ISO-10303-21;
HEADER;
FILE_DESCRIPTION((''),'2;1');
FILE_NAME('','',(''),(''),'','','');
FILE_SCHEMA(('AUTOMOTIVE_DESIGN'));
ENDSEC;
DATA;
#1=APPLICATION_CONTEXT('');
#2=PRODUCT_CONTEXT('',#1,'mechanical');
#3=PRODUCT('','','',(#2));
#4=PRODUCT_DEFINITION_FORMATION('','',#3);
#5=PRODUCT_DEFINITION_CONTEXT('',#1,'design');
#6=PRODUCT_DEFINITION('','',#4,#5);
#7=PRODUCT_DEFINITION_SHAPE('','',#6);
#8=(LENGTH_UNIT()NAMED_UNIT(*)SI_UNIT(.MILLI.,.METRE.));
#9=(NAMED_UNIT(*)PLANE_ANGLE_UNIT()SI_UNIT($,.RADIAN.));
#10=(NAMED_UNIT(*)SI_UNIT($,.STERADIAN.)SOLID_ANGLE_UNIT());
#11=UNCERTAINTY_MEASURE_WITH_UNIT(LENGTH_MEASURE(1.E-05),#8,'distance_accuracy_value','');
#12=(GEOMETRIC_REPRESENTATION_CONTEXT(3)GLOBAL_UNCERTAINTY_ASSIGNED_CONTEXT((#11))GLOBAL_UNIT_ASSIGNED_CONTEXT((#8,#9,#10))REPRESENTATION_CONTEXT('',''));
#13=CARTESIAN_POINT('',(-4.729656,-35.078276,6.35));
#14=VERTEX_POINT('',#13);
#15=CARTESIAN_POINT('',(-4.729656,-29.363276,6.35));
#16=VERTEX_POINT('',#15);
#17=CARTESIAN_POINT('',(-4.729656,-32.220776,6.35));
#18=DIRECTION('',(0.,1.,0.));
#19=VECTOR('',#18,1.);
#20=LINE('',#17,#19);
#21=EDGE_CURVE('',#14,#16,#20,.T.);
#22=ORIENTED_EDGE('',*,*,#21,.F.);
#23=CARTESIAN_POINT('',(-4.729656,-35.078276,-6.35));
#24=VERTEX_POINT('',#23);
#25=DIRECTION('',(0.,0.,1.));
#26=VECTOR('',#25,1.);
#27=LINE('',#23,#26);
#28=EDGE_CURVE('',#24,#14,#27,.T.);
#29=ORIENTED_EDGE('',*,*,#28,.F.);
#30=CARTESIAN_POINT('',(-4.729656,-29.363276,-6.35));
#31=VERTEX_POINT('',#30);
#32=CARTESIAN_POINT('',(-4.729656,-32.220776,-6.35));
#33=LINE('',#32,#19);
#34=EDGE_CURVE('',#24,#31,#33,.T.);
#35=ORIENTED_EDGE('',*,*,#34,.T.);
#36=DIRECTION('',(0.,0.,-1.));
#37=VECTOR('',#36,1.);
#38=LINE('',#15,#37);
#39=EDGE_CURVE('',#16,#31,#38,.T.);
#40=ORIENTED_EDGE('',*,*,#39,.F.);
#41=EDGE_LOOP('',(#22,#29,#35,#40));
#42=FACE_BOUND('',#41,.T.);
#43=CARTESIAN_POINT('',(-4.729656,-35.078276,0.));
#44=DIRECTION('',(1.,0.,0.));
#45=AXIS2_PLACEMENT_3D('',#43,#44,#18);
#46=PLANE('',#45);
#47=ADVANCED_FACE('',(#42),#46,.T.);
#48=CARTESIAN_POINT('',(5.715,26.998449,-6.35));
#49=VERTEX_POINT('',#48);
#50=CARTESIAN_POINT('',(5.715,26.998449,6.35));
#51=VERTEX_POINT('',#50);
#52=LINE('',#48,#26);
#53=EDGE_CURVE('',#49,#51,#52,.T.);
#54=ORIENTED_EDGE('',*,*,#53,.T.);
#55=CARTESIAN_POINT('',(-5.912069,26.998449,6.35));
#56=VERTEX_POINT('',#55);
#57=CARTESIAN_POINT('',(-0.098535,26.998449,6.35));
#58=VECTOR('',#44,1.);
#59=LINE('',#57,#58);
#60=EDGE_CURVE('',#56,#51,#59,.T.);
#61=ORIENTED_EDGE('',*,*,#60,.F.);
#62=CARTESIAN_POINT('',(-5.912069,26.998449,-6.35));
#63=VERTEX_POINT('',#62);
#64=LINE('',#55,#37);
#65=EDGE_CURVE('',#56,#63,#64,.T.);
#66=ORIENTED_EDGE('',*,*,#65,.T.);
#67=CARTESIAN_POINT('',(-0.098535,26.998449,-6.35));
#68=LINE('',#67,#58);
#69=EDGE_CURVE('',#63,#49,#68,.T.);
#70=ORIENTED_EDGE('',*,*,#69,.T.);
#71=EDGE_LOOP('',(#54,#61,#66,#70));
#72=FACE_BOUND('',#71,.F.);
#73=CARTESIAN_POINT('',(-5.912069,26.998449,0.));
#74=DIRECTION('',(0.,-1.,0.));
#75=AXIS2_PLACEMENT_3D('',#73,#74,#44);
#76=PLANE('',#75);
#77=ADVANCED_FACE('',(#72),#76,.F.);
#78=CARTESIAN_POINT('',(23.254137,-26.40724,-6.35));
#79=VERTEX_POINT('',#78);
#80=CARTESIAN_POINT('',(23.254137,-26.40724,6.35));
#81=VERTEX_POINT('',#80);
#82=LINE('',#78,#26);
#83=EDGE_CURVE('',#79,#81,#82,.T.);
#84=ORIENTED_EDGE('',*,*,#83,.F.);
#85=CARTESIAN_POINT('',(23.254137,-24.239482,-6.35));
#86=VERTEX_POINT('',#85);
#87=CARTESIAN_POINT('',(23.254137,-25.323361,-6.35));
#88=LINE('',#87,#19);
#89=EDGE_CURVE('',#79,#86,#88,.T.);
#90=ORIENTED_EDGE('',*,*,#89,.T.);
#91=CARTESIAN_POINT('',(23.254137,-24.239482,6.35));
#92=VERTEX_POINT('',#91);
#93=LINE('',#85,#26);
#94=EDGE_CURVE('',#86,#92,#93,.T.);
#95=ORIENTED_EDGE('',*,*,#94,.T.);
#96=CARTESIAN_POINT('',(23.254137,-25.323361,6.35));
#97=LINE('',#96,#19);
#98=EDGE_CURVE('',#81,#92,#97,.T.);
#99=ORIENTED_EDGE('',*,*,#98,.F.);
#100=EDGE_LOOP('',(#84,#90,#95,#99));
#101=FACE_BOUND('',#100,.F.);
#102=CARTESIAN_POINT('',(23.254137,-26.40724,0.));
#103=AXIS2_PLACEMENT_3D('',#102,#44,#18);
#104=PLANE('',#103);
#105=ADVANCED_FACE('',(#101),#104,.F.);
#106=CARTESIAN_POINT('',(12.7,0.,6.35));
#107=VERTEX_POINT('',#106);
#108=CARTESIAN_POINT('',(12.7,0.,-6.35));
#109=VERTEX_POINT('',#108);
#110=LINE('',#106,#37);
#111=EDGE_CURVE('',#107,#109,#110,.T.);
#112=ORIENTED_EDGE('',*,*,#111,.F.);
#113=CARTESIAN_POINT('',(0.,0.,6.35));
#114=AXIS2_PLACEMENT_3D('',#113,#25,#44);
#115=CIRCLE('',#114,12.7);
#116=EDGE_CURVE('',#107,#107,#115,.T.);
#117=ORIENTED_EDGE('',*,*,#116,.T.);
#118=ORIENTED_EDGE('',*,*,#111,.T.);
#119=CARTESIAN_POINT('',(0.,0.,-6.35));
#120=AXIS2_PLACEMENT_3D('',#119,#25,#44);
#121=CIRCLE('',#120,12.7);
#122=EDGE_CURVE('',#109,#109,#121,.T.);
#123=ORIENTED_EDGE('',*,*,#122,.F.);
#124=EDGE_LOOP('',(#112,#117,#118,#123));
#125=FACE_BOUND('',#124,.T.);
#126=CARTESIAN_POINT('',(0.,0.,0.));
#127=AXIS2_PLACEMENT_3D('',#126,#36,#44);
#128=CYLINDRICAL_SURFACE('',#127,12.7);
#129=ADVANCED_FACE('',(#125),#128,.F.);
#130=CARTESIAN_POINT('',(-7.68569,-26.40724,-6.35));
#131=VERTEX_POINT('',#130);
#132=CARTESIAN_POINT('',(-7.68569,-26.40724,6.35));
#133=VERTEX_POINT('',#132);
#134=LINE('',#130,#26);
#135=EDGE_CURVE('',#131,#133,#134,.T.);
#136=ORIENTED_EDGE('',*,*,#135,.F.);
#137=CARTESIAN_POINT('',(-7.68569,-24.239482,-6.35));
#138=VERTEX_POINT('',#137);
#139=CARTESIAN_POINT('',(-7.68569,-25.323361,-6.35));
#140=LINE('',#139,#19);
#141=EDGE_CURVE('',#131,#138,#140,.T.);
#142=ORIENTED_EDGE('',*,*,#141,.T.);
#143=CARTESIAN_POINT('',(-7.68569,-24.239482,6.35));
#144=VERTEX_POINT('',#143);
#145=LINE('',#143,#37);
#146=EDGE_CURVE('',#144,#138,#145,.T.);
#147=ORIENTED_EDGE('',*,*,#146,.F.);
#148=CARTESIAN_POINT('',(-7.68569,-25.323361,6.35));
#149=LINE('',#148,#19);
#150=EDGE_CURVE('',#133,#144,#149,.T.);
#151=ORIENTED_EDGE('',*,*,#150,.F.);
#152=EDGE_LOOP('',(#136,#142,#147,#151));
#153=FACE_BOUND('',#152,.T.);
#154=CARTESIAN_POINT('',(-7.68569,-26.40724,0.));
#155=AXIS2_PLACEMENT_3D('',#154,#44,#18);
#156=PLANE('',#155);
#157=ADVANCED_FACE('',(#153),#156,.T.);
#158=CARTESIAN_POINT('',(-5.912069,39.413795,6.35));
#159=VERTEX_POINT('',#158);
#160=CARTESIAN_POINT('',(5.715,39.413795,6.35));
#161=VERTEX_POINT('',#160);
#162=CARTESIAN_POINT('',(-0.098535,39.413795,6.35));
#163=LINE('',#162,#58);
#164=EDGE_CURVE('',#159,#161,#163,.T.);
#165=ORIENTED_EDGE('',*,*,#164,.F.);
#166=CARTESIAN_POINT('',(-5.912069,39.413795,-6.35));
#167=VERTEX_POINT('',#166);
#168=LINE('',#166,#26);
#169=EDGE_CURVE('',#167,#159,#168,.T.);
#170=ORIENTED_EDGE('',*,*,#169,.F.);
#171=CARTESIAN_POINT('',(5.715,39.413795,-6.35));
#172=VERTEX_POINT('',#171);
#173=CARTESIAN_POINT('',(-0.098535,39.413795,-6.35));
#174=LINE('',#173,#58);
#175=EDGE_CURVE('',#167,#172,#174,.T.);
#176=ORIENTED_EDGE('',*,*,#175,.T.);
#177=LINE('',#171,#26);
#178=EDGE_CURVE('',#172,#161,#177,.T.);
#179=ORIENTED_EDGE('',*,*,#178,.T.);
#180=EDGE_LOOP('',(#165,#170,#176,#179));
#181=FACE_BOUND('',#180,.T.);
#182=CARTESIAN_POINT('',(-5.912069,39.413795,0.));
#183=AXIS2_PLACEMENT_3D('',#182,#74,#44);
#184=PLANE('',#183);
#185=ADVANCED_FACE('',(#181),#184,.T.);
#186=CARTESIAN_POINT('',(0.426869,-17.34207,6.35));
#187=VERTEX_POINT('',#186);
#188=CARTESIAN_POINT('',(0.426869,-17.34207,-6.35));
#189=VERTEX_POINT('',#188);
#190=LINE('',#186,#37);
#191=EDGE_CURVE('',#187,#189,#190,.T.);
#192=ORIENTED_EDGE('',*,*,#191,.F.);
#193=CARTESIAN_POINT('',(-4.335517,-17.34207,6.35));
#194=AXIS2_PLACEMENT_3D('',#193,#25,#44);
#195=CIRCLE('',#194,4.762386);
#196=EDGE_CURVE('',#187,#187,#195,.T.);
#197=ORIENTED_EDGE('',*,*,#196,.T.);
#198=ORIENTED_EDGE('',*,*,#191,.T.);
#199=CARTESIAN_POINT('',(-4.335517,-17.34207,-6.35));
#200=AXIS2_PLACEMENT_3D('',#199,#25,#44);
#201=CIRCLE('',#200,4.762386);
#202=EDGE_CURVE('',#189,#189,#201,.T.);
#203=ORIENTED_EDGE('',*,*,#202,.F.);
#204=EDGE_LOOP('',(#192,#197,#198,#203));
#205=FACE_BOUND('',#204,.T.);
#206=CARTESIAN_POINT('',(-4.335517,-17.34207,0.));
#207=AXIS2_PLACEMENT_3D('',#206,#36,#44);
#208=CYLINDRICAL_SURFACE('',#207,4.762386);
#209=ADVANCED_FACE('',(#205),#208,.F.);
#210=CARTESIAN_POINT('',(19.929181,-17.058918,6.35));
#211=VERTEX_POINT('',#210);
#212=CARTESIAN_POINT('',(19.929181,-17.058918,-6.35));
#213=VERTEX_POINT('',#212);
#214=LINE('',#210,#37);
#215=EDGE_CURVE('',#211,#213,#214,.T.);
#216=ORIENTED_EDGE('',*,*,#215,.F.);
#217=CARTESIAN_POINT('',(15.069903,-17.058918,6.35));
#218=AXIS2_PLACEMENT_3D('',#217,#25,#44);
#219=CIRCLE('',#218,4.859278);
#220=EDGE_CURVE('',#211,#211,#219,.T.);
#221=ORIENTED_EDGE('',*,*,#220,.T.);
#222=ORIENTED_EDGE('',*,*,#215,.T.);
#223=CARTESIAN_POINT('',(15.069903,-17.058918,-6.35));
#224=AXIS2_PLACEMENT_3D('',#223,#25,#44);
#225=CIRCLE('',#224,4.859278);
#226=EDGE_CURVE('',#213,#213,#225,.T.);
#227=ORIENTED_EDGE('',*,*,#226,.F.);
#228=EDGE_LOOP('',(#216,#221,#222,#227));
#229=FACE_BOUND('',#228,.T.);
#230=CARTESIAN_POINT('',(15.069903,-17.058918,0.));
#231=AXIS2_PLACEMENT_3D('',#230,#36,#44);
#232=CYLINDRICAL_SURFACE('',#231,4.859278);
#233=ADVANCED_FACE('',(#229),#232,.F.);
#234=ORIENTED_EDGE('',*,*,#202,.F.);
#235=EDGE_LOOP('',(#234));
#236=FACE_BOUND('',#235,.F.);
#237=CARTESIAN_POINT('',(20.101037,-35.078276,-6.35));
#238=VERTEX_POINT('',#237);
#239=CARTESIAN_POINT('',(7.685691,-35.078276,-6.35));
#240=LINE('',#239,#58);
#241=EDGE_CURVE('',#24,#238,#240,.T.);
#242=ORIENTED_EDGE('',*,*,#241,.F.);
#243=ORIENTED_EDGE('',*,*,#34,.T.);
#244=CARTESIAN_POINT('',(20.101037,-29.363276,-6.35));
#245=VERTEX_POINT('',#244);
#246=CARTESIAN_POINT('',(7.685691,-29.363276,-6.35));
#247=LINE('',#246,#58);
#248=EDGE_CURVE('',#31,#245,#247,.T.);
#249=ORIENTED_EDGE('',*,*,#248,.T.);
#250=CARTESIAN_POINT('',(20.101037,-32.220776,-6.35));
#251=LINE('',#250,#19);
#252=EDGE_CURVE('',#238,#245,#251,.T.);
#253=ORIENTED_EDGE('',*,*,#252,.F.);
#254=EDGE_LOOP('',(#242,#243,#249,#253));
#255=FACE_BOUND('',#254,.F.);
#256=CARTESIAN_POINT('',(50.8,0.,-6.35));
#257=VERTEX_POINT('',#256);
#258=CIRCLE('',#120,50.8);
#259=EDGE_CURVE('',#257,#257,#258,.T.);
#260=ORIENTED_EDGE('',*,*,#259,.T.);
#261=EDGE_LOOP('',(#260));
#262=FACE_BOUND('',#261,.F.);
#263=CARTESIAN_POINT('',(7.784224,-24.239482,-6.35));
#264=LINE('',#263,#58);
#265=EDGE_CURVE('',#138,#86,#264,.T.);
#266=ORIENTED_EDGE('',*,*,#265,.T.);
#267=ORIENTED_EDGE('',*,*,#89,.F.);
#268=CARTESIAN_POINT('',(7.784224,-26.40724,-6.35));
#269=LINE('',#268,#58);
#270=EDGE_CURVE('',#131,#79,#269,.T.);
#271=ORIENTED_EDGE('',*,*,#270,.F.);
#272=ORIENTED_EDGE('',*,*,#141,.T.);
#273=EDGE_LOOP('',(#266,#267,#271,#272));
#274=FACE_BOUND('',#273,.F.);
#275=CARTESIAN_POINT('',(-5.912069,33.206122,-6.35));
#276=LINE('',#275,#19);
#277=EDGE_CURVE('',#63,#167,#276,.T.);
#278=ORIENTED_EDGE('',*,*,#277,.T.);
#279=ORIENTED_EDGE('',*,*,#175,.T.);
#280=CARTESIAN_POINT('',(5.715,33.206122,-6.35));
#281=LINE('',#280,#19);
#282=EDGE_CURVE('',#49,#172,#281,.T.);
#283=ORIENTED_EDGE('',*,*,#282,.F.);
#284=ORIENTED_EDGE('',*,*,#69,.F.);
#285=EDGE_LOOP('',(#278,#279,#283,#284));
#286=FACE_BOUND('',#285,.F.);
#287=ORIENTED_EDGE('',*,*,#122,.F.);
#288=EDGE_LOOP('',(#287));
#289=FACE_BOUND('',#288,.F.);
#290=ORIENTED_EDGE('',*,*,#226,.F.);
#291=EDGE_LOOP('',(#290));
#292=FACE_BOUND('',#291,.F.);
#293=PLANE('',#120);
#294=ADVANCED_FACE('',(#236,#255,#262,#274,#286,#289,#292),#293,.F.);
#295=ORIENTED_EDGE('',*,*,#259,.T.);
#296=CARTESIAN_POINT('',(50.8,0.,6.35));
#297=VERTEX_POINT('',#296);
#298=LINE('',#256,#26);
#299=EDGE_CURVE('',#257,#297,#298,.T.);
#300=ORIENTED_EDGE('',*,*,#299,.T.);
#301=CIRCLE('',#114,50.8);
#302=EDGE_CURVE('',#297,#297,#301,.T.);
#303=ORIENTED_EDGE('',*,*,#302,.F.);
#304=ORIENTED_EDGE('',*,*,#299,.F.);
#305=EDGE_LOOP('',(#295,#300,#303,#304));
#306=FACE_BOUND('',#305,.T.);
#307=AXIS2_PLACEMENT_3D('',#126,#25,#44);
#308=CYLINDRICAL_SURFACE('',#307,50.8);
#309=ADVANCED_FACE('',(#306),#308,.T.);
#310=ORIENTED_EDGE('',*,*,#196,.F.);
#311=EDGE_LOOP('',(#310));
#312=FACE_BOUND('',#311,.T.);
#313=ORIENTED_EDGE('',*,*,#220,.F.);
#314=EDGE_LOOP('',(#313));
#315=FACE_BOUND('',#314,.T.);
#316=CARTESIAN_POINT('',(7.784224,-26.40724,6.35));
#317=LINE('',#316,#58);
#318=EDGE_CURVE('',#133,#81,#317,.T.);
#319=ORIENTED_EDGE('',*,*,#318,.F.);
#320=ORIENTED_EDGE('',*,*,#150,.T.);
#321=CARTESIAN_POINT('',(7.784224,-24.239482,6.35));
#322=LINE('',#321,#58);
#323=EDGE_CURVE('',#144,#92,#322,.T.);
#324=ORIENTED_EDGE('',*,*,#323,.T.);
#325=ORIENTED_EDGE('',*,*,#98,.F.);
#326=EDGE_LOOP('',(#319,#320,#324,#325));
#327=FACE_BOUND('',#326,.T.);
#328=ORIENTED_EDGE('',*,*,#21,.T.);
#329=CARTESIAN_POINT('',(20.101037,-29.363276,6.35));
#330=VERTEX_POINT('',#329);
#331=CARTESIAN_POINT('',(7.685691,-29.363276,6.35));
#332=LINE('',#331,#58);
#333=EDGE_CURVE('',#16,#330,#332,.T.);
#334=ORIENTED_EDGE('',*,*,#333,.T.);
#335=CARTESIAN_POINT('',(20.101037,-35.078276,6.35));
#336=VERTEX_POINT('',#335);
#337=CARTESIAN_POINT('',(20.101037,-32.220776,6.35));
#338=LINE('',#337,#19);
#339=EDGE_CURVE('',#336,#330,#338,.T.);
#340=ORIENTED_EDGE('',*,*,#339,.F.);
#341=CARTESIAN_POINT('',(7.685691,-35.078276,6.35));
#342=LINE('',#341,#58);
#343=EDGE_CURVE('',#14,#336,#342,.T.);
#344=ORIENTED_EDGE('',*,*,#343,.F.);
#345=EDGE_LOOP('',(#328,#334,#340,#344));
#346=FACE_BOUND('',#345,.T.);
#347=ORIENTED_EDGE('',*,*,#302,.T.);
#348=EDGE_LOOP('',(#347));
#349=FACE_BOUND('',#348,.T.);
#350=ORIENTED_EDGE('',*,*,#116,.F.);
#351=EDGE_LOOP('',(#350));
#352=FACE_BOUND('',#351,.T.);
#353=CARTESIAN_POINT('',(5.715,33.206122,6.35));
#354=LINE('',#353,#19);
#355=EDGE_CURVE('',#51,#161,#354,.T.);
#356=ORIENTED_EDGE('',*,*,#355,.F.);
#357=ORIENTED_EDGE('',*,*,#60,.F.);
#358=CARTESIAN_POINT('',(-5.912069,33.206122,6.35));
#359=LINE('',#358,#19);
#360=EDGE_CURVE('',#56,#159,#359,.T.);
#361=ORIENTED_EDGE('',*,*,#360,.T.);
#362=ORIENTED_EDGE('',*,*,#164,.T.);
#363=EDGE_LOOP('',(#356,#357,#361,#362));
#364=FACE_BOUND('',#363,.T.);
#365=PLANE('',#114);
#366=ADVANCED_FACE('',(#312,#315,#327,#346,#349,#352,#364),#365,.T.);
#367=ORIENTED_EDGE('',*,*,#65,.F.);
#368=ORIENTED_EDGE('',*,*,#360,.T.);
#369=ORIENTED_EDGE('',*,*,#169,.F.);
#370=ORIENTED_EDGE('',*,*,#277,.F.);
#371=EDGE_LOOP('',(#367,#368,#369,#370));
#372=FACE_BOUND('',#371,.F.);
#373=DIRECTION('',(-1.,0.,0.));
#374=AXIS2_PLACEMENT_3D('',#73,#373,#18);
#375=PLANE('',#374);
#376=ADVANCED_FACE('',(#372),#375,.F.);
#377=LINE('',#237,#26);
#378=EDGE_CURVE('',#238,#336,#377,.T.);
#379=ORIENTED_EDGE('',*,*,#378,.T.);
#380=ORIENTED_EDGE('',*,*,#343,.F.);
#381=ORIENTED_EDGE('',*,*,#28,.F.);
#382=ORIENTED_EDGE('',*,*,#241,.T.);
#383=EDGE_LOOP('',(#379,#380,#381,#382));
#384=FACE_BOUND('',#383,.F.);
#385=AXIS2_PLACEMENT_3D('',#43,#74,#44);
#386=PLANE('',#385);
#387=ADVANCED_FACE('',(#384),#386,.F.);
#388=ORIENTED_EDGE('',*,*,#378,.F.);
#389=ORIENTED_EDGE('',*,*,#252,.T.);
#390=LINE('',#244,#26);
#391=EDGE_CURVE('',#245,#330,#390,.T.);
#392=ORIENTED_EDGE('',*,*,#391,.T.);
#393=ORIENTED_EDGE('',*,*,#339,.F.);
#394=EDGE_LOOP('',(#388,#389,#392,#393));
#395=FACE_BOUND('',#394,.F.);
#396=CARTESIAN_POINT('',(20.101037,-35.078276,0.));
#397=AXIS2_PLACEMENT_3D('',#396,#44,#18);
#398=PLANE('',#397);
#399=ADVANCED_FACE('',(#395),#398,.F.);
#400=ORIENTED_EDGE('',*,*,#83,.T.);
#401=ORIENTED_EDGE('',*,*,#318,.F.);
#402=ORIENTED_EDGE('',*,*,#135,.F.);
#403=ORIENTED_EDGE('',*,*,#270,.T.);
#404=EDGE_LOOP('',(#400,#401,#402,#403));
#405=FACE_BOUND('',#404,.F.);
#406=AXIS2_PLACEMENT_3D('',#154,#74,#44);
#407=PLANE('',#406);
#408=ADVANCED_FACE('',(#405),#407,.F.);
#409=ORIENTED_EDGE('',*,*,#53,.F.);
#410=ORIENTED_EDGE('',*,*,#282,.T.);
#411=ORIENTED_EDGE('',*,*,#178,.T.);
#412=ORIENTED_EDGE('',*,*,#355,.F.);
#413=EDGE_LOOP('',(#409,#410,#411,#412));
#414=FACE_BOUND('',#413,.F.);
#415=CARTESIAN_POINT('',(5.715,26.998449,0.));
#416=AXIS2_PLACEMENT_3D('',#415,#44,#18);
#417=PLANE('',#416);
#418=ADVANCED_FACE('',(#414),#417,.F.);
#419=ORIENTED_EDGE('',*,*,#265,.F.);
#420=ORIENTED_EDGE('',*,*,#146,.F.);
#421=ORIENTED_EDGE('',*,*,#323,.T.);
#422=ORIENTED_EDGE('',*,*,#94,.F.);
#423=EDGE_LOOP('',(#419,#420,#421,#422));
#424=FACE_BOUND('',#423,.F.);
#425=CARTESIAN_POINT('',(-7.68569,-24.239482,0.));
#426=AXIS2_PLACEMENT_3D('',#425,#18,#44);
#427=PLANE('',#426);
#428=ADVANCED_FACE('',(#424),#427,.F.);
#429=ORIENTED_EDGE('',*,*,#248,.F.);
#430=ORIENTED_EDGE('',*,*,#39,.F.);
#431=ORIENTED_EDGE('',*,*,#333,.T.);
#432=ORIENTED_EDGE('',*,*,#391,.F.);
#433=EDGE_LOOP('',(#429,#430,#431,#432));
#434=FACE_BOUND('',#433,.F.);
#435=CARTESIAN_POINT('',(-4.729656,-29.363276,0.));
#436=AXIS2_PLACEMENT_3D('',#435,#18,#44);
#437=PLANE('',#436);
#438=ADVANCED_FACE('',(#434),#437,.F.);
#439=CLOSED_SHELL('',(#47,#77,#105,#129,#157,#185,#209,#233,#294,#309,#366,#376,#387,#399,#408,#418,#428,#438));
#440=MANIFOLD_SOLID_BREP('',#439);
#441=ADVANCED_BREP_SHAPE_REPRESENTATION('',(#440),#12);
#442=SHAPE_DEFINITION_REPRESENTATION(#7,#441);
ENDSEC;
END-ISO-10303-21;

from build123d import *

# Parameters (mm, degrees)
F0_R     = 50.8
F0_R_2   = 4.7623858448
F0_R_3   = 12.7
F0_W     = 24.8306924477
F0_H     = 5.7149995118
F0_W_2   = 30.9398272075
F0_H_2   = 2.1677576005
F0_R_4   = 4.8592779804
F0_W_3   = 11.6270687431
F0_H_3   = 12.4153457582
F1_DEPTH = 6.35


# Not quite as in the source:
# - a length typed as a fraction of an inch, garbled in the dataset ("3 / 203.2 mm" for 3/8 in), is restored


with BuildPart() as f1:
    # F0 (on Top) → F1 (new body, symmetric)
    with BuildSketch(Plane.XY):
        Circle(F0_R)
        with Locations((-4.3355170637, -17.3420701176)):
            Circle(F0_R_2, mode=Mode.SUBTRACT)
        Circle(F0_R_3, mode=Mode.SUBTRACT)
        with Locations((7.6856906526, -32.2207761928)):
            Rectangle(F0_W, F0_H, mode=Mode.SUBTRACT)
        with Locations((7.7842238825, -25.3233611584)):
            Rectangle(F0_W_2, F0_H_2, mode=Mode.SUBTRACT)
        with Locations((15.0699028745, -17.0589182526)):
            Circle(F0_R_4, mode=Mode.SUBTRACT)
        with Locations((-0.0985348597, 33.206121996)):
            Rectangle(F0_W_3, F0_H_3, mode=Mode.SUBTRACT)
    extrude(amount=F1_DEPTH, both=True)


solid = f1.part
